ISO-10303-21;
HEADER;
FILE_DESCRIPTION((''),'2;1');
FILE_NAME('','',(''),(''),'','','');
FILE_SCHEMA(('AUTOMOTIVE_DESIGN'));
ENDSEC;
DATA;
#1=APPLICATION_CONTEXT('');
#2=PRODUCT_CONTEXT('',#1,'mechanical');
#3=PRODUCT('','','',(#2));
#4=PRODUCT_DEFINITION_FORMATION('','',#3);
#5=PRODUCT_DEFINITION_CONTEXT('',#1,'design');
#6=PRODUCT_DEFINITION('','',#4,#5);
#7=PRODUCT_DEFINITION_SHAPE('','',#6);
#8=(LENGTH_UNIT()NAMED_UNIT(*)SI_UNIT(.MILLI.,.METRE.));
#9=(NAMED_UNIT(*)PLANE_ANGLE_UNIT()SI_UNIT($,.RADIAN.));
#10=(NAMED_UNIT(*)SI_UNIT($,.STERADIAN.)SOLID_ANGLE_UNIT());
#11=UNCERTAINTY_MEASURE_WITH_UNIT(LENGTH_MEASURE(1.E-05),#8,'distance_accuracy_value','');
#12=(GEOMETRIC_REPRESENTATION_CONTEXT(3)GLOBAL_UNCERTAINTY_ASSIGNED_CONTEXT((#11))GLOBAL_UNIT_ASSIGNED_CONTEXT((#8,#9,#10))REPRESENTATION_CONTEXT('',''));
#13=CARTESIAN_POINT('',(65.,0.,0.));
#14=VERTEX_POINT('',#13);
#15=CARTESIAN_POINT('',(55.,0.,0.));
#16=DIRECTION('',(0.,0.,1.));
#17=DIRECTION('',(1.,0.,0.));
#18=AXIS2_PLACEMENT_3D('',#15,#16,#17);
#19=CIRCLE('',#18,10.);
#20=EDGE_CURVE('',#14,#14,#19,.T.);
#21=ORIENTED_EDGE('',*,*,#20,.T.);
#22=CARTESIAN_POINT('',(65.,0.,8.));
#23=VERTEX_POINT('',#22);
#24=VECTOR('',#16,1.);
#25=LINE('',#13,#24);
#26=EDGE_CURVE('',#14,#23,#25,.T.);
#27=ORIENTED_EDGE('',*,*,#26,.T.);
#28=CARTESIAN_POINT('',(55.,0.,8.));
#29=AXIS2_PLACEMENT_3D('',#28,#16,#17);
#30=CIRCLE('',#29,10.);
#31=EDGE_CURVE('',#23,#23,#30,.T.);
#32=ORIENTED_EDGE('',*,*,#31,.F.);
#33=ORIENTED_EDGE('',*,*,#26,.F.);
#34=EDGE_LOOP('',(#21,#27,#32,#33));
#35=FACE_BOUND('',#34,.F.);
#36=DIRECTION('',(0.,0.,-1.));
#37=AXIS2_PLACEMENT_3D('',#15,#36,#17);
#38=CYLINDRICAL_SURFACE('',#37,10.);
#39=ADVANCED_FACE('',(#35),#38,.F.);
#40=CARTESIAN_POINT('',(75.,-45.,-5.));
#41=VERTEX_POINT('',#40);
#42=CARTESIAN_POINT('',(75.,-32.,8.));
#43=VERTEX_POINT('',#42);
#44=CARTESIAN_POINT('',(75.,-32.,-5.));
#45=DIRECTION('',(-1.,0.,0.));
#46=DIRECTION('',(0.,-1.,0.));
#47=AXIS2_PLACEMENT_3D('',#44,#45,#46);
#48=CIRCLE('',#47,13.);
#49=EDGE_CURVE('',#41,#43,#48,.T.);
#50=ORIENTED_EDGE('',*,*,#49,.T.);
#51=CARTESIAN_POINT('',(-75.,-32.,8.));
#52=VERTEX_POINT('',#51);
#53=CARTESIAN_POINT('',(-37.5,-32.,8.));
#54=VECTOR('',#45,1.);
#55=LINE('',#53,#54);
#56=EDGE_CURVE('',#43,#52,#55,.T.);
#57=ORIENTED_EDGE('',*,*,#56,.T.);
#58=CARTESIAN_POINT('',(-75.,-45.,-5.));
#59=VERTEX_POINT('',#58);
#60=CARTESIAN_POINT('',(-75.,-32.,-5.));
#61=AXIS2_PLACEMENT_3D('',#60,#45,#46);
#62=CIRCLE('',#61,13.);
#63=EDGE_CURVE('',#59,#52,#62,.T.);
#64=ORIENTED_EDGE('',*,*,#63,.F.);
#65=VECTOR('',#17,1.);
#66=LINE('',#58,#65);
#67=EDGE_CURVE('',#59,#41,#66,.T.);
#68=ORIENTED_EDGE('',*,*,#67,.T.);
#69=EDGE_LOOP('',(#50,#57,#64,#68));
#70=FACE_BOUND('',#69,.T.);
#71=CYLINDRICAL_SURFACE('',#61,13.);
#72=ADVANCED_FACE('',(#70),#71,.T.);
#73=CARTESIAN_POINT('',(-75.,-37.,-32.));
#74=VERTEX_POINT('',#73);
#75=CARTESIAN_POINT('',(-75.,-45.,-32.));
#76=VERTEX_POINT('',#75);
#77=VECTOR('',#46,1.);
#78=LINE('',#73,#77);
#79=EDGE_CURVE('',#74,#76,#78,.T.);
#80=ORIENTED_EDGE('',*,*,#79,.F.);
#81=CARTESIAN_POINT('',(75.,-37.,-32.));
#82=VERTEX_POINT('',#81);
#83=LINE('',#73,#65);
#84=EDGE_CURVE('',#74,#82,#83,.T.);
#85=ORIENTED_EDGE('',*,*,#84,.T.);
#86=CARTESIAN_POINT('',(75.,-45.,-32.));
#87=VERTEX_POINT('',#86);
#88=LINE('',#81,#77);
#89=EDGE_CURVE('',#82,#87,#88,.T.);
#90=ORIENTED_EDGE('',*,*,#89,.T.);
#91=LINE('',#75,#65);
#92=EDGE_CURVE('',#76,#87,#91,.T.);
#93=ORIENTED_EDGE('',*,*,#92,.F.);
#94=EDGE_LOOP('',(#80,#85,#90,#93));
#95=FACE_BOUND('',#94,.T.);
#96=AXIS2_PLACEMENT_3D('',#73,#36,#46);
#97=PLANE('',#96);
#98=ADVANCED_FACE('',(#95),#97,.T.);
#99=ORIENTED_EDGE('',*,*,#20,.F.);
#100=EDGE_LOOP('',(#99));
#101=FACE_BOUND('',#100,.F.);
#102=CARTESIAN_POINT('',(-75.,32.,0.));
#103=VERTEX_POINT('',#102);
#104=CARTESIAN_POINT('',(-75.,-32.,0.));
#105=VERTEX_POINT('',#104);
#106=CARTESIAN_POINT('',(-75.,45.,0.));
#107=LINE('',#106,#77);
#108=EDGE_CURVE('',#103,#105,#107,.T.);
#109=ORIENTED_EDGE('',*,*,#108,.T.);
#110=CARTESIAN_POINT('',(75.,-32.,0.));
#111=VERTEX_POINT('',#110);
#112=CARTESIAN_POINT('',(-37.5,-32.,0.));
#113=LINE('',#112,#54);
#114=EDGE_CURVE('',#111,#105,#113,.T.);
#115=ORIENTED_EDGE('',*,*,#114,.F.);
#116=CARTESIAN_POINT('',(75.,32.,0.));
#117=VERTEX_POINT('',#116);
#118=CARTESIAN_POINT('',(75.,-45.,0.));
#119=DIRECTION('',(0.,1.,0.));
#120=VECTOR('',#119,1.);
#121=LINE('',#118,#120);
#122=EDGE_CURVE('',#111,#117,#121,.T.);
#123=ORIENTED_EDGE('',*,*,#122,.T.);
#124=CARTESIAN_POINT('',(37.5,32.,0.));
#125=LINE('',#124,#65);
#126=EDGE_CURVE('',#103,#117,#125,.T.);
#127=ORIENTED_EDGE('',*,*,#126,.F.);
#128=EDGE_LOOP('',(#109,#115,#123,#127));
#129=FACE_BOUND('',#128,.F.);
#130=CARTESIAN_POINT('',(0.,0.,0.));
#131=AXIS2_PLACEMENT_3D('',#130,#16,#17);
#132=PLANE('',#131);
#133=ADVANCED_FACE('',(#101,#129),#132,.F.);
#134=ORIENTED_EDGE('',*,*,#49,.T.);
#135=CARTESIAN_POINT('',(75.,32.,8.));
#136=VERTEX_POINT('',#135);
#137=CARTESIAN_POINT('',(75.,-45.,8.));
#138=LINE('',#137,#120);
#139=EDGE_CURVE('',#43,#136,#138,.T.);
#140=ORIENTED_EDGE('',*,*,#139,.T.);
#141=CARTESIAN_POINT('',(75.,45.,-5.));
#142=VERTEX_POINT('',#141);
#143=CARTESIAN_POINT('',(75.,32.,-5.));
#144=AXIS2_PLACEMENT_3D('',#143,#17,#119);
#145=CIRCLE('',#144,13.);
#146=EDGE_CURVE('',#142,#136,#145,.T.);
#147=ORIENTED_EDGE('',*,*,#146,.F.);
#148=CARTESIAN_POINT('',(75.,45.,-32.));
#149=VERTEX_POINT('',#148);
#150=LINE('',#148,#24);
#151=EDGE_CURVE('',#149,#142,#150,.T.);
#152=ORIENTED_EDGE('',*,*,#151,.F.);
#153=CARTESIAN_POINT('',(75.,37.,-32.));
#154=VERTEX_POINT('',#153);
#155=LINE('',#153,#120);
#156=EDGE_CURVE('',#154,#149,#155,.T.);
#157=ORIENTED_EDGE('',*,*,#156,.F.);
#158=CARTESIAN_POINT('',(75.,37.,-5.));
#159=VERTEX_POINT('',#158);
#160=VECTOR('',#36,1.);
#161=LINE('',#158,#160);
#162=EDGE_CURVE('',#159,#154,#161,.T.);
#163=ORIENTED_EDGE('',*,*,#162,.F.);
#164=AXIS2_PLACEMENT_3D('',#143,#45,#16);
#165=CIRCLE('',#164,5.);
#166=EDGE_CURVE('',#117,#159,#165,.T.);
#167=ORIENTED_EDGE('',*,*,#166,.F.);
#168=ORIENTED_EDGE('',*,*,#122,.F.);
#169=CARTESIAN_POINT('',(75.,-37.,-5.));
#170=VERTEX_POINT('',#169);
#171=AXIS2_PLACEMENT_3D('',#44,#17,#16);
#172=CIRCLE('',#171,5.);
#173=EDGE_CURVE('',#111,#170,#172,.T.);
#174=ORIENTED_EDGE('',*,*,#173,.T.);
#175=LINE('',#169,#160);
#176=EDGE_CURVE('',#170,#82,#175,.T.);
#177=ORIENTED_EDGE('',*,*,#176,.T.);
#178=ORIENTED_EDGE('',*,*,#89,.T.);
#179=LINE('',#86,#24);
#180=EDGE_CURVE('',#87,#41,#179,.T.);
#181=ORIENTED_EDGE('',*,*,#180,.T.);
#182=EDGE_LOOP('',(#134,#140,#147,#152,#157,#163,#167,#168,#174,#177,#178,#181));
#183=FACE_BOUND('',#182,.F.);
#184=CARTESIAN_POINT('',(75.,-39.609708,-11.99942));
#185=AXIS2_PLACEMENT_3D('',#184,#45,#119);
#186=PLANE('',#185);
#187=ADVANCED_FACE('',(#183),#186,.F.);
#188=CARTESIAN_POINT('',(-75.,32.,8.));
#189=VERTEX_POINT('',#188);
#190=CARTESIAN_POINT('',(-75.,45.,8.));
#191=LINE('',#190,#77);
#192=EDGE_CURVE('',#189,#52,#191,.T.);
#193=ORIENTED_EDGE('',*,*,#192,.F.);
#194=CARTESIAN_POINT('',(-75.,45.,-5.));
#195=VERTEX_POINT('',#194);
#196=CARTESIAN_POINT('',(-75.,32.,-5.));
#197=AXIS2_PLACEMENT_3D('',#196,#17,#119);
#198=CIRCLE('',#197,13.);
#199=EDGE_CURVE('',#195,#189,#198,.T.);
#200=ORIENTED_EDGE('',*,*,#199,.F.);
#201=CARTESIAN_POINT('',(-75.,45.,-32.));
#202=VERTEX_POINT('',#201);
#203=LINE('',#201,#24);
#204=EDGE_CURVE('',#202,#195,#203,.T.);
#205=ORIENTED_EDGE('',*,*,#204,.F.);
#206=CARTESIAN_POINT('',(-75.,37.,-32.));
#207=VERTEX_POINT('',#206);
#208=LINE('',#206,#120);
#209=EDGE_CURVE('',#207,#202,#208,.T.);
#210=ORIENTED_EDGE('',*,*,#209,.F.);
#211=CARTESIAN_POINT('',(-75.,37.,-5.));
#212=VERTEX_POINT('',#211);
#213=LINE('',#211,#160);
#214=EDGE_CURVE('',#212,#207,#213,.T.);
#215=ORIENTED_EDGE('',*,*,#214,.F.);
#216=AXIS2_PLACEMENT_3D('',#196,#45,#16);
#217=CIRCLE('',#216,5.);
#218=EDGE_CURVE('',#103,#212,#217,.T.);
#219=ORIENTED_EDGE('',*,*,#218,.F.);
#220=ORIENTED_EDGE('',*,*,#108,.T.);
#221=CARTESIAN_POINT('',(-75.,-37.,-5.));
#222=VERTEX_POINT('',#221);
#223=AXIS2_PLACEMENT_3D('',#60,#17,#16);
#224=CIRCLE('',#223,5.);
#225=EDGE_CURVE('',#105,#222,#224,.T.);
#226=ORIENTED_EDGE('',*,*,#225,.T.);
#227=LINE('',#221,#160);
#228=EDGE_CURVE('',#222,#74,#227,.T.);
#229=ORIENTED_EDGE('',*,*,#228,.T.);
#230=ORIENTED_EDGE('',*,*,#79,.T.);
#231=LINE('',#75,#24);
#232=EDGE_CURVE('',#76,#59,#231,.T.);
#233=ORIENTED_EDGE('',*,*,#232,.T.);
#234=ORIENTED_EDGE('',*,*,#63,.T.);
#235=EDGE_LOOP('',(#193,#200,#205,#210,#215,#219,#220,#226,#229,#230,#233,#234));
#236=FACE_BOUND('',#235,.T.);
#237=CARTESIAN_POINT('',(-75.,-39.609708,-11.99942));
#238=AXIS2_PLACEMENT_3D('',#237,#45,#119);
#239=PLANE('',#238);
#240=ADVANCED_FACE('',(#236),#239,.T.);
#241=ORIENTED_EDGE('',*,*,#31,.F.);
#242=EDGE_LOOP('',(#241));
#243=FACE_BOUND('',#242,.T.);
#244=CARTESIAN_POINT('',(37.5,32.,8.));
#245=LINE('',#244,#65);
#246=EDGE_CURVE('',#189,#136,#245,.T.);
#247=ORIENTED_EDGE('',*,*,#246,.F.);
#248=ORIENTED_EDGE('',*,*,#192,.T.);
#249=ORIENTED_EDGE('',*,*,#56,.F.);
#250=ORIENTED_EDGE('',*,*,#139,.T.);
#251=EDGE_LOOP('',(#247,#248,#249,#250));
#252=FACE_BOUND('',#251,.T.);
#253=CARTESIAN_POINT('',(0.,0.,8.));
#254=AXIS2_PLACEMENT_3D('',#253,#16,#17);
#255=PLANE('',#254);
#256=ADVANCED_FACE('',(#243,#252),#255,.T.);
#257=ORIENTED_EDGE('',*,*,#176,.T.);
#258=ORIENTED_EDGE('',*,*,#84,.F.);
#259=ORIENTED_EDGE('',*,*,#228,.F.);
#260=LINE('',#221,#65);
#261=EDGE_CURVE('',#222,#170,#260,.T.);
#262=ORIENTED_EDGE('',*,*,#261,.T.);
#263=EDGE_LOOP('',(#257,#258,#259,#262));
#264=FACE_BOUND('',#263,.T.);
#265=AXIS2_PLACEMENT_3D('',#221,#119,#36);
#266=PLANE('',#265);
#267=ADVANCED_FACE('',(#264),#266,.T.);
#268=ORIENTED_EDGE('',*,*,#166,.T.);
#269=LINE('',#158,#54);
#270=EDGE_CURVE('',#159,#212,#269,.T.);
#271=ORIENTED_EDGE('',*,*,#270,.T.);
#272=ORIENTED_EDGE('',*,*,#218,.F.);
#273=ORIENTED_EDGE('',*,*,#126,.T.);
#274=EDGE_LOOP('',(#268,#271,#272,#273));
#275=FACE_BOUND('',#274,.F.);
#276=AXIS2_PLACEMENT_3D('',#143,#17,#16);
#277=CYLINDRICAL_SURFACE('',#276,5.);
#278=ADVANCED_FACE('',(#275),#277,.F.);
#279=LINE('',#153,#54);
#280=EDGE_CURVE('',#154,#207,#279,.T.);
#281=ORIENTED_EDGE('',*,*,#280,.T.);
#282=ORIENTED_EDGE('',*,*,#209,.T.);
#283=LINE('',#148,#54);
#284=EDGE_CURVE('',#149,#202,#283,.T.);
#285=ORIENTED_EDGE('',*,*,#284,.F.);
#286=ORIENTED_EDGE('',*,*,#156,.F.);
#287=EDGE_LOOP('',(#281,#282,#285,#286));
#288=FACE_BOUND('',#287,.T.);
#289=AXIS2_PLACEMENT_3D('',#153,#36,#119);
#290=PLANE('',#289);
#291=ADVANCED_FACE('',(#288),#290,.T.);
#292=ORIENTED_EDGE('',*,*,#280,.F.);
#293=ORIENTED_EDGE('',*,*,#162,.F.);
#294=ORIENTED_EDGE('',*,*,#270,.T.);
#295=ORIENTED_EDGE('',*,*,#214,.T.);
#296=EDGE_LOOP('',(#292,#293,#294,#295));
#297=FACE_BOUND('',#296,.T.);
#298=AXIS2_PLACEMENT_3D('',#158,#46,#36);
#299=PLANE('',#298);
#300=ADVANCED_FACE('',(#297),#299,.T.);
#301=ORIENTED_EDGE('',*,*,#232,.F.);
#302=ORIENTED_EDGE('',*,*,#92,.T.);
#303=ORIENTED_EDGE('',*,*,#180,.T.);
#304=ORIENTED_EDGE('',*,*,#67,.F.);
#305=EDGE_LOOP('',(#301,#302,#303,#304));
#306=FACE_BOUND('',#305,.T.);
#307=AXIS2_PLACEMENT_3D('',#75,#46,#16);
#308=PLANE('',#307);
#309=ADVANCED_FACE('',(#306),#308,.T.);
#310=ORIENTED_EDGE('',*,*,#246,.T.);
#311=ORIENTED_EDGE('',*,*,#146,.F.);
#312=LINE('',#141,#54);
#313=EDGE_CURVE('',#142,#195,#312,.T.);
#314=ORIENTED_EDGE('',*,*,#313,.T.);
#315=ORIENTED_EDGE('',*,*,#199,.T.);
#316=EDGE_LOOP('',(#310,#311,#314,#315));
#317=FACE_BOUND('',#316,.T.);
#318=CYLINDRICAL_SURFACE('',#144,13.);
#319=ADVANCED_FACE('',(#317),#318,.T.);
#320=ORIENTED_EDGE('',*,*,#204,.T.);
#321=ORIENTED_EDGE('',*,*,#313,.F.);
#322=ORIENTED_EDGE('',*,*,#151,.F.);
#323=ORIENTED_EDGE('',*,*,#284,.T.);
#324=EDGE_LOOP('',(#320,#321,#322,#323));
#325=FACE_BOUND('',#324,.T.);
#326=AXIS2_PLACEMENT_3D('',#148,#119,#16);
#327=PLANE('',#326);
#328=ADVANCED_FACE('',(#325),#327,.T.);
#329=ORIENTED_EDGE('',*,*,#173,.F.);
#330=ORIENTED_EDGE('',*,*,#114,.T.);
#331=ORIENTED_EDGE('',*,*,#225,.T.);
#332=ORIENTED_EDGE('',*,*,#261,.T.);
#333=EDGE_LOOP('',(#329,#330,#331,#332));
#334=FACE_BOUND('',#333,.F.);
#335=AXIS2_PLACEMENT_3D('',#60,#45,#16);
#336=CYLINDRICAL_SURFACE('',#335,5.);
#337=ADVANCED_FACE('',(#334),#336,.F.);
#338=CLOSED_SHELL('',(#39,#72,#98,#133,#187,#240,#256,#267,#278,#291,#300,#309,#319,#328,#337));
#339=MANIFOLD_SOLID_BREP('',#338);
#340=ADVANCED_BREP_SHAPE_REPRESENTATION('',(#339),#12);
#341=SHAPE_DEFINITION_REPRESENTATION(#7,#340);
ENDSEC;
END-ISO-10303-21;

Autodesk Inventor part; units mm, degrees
ref_plane "YZ Plane" through (0, 0, 0) normal (1, 0, 0) x (0, 1, 0)
ref_plane "XZ Plane" through (0, 0, 0) normal (0, 1, 0) x (-1, 0, 0)
ref_plane "XY Plane" through (0, 0, 0) normal (0, 0, 1) x (1, 0, 0)
sketch "Sketch1" plane through (0, 0, 0) normal (0, 0, 1) x (1, 0, 0)
  line L0 (-75, -45) -> (75, -45)
  line L1 (75, -45) -> (75, 45)
  line L2 (75, 45) -> (-75, 45)
  line L3 (-75, 45) -> (-75, -45)
  line L4 (-75, -45) -> (75, 45) construction
  line L5 (75, -45) -> (-75, 45) construction
  circle A0 centre (55, -25) radius 10
  circle A1 centre (55, 25) radius 10
  line L6 (0, 0) -> (75, 0) construction
  circle A2 centre (55, 0) radius 10
  dimension "d0" = 150
  dimension "d1" = 90
  dimension "d23" = 20
  dimension "d25" = 20
  dimension "d26" = 20
extrude "Plate1" add sketch "Sketch1" along normal blind 8 contours L3 L2 L1 L0 | A0 | A1
sketch "Sketch6" plane through (-75, -37, 8) normal (0, -1, 0) x (1, 0, 0)
  line L0 (150, 0) -> (0, 0)
  line L1 (0, 0) -> (0, -40)
  line L2 (0, -40) -> (150, -40)
  line L3 (150, -40) -> (150, 0)
edge flange "Flange2" height 40 angle 90 thickness 8 bend radius 5 thickness toward (0, -1, 0) relief round relief width 8 relief depth 4 corner gap 5 corner form 0 edges at (0, -45, 0) (0, 45, 0) wall of the first edge with corners at (75, -37, 8) (-75, -37, 8) (-75, -37, -32) (75, -37, -32)
bend "Bend2"
corner "Corner2"
equation "\"d26\" = d25"
equation "\"d2\" = Thickness"
equation "\"d30\" = BendReliefWidth"
equation "\"d31\" = BendReliefDepth"
equation "\"d32\" = MinimumRemnant"
equation "\"d33\" = TransitionRadius"
equation "\"d36\" = BendRadius"
equation "\"d37\" = CornerReliefSize"
equation "\"d38\" = GapSize"
equation "\"d39\" = JacobiRadiusSize"
equation "\"BendReliefWidth\" = Thickness"
equation "\"BendReliefDepth\" = 0.5 * Thickness"
equation "\"CornerReliefSize\" = 4 * Thickness"
equation "\"MinimumRemnant\" = 2 * Thickness"
equation "\"TransitionRadius\" = BendRadius"
equation "\"JacobiRadiusSize\" = BendRadius"
equation "\"GapSize\" = Thickness"
equation "\"Thickness\" = 8"
equation "\"BendRadius\" = 5"
properties part number "PRS 1200-95 leg floor channel" material "Steel"
